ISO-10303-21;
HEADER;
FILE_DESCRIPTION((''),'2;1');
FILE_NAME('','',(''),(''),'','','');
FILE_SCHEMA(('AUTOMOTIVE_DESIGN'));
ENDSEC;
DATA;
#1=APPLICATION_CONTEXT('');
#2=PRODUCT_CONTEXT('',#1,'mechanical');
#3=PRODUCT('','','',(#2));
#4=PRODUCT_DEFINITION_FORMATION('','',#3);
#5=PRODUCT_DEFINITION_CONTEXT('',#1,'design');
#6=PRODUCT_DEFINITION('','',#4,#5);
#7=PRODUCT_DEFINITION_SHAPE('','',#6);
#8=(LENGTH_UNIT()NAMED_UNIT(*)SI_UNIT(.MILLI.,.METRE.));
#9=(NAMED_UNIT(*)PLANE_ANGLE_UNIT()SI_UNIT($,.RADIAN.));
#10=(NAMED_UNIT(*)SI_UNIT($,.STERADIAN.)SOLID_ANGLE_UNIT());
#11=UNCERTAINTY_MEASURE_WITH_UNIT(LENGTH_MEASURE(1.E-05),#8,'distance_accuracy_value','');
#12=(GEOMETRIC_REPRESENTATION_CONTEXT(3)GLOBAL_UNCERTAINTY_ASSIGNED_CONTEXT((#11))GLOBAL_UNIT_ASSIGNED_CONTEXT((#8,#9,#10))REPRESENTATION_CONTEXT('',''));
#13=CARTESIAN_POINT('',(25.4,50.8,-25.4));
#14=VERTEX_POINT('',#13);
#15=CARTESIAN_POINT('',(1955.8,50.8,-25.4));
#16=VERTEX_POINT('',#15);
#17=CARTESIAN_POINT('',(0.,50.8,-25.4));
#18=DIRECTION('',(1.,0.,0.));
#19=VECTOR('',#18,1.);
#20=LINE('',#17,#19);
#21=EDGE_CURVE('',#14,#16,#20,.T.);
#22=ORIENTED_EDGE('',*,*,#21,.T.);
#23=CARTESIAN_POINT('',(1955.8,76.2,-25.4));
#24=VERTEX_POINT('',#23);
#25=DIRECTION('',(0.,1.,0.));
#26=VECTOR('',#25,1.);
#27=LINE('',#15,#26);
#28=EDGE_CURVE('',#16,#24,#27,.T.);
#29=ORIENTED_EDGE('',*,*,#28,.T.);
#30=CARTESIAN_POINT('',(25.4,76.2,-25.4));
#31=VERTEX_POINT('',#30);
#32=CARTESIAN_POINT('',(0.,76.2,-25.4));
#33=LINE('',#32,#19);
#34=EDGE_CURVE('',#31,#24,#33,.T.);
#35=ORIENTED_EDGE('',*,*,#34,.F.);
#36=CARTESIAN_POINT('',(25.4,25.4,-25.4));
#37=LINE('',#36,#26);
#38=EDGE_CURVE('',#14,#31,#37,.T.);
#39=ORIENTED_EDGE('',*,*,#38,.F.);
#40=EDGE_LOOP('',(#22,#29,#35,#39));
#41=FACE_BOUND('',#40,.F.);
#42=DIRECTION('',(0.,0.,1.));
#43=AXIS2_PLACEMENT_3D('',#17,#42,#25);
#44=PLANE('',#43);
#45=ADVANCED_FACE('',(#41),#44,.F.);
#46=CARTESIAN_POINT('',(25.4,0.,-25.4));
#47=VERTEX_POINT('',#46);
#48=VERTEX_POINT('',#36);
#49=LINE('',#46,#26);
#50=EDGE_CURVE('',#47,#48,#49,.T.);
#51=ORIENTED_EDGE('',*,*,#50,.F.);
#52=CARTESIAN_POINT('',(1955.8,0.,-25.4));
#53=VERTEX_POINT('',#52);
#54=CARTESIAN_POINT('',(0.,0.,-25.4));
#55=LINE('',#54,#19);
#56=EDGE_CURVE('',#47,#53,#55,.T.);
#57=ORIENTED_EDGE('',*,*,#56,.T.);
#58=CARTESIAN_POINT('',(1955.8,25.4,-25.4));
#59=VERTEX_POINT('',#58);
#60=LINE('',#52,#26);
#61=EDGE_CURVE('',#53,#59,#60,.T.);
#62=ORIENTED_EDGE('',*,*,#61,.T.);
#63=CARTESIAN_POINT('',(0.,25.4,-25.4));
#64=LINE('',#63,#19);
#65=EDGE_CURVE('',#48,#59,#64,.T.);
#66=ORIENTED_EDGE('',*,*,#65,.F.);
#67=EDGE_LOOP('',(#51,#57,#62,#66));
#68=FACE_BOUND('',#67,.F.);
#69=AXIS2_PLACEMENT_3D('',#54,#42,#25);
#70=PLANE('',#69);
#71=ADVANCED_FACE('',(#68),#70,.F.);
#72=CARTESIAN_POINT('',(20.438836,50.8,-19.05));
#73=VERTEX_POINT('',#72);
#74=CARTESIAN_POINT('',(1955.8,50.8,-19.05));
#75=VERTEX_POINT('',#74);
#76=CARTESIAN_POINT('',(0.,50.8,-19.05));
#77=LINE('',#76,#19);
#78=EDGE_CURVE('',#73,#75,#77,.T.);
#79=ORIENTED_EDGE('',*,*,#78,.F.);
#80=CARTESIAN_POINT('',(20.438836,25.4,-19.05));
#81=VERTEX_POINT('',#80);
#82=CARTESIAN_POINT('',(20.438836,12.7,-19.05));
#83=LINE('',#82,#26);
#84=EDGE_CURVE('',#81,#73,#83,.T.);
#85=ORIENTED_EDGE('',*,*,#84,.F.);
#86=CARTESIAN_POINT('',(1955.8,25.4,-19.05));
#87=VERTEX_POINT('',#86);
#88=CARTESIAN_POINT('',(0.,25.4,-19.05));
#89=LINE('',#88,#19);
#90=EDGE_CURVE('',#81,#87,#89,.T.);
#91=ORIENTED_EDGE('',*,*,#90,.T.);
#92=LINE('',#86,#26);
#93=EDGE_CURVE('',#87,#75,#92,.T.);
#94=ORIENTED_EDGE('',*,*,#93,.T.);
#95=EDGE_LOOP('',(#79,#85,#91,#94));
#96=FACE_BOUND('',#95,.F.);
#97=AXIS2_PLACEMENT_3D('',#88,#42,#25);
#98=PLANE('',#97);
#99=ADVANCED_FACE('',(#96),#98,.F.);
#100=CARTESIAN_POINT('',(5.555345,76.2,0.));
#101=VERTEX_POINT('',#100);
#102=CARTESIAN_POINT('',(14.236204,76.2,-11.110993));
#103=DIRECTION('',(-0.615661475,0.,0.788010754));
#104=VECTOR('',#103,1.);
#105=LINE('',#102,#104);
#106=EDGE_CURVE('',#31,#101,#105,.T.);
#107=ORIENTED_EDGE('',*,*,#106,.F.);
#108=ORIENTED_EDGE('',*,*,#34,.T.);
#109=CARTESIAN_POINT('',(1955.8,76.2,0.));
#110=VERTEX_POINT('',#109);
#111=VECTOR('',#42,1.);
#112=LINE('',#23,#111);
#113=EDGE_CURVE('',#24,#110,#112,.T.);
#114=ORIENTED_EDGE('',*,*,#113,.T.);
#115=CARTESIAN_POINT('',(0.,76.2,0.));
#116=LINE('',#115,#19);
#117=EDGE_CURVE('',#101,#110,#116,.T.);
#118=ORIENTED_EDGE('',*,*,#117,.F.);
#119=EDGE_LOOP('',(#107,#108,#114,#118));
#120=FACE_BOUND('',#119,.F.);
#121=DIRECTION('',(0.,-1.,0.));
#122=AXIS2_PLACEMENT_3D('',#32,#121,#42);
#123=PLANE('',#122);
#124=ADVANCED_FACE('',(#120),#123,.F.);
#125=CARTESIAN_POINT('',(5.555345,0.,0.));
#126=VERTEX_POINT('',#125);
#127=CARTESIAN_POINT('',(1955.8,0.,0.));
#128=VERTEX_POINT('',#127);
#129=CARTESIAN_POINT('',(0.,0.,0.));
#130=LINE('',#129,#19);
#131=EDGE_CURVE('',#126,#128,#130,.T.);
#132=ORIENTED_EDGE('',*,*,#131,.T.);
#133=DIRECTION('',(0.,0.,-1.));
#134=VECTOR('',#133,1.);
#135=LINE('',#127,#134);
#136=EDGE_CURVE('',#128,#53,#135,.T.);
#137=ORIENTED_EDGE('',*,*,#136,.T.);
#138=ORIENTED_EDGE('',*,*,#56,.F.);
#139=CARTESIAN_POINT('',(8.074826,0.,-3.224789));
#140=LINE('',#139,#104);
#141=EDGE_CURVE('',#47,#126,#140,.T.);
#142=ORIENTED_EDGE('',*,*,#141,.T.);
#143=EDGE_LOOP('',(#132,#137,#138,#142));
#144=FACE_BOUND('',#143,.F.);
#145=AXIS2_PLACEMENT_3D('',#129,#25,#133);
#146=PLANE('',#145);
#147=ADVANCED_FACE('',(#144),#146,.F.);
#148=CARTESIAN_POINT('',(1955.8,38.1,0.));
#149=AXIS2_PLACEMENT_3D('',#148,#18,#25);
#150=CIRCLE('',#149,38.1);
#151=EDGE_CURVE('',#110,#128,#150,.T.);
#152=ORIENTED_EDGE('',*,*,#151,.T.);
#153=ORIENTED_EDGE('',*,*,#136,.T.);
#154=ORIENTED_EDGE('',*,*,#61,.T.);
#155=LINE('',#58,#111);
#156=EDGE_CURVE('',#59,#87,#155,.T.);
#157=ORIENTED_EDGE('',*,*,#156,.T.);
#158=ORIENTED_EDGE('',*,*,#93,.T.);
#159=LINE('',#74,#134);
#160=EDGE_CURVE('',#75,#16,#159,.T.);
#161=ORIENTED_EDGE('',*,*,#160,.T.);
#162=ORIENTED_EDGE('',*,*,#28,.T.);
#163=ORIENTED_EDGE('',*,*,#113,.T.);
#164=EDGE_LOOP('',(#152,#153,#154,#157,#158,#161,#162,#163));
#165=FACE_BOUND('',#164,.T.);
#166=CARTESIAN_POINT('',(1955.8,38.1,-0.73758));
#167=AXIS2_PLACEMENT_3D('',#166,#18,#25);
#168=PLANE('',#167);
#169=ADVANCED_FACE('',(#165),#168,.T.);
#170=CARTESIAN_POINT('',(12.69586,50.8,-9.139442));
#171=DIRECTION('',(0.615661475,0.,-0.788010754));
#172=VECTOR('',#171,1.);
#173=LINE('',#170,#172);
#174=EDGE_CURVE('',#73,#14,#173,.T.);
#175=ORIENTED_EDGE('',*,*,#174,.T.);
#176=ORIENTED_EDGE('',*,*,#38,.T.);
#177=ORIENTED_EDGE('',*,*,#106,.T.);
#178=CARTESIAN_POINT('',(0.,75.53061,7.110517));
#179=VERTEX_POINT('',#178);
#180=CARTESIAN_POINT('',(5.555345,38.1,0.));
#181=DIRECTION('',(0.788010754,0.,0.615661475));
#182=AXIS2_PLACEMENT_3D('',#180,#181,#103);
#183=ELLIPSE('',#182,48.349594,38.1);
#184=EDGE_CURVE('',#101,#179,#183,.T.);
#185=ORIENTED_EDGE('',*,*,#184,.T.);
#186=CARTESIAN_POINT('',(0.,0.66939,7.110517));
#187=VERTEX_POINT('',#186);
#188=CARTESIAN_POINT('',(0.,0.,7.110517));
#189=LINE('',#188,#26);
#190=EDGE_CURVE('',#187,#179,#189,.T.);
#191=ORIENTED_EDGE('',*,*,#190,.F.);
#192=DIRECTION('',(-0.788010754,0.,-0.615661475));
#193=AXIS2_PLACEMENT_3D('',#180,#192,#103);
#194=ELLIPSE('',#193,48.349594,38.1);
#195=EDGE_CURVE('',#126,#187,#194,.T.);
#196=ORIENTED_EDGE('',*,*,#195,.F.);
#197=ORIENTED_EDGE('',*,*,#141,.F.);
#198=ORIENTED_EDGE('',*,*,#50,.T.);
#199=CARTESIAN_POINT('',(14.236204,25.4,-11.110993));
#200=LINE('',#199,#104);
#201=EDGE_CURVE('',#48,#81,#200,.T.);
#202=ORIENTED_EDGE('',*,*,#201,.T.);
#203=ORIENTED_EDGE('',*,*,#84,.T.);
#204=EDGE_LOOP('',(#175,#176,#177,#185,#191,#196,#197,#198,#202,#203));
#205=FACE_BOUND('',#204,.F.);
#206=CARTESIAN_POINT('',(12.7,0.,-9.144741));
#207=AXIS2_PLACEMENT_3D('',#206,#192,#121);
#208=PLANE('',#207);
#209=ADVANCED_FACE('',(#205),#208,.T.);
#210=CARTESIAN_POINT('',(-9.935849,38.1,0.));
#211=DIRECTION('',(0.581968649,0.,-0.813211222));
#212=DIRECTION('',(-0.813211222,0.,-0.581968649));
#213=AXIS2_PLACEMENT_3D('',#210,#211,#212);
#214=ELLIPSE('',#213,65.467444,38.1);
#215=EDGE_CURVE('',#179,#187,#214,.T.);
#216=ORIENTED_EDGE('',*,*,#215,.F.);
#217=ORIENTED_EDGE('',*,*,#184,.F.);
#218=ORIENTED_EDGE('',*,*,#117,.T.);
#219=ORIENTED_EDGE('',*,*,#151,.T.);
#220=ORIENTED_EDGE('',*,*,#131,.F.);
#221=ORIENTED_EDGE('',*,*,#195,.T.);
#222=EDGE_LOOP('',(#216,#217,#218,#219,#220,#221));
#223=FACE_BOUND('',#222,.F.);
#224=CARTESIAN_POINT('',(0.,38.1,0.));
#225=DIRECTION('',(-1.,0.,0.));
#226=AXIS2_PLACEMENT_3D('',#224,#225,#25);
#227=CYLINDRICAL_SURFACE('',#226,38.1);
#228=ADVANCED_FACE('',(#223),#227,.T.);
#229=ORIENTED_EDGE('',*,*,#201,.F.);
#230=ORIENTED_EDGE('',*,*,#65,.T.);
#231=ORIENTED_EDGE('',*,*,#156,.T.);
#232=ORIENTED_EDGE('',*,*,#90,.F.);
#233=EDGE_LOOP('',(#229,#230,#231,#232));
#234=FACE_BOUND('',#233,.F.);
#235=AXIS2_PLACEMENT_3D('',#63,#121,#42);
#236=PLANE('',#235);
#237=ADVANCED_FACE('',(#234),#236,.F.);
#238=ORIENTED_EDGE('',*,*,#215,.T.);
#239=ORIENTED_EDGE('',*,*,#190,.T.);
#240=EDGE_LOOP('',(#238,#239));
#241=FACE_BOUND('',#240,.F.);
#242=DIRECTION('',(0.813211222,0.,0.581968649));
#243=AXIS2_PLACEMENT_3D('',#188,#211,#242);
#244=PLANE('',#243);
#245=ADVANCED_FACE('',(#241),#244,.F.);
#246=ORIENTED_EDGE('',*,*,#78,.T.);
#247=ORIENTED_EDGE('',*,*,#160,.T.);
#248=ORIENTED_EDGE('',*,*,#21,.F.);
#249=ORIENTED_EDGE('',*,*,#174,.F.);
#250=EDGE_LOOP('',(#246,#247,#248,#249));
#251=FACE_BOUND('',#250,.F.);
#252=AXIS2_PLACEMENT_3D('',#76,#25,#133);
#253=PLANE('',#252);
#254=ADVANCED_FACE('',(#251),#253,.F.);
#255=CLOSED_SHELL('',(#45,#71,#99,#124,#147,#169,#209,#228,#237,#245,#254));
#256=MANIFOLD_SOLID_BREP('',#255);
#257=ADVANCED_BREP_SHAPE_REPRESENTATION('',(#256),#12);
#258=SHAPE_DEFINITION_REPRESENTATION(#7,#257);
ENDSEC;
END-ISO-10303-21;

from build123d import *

# Parameters (mm, degrees)
F1_DEPTH = 1955.8
F2_SIZE2 = 32.5105174577
F2_SIZE  = 25.4
F4_DEPTH = 76.201


# Not quite as in the source:
# - a feature names something its author has since deleted; it is built from what else it names


with BuildPart() as f1:
    # F0 (on Right) → F1 (new body)
    with BuildSketch(Plane.YZ):
        with BuildLine():
            Line((0, 0), (0, -25.4))
            Line((0, -25.4), (25.4, -25.4))
            Line((25.4, -25.4), (25.4, -19.05))
            Line((25.4, -19.05), (50.8, -19.05))
            Line((50.8, -19.05), (50.8, -25.4))
            Line((50.8, -25.4), (76.2, -25.4))
            Line((76.2, -25.4), (76.2, 0))
            ThreePointArc((76.2, 0), (38.1, 38.1), (0, 0))
        make_face()
    extrude(amount=F1_DEPTH)

    # F2
    f2_edges = [f1.edges().sort_by_distance(p)[0] for p in [
        (0, 12.7, -25.4),
    ]]
    f2_side = f1.faces().sort_by_distance((977.9, 12.7, -25.4))[0]
    chamfer(f2_edges, length=F2_SIZE, length2=F2_SIZE2, reference=f2_side)

    # F3 (on Front) → F4 (cut, through all)
    with BuildSketch(Plane.XZ):
        Polygon((44.9116937816, 39.251241833), (17.98238638, 50.449128889), (0, 45.5416738987), (0, 7.1105174577), align=None)
    extrude(amount=-F4_DEPTH, mode=Mode.SUBTRACT)


solid = f1.part
